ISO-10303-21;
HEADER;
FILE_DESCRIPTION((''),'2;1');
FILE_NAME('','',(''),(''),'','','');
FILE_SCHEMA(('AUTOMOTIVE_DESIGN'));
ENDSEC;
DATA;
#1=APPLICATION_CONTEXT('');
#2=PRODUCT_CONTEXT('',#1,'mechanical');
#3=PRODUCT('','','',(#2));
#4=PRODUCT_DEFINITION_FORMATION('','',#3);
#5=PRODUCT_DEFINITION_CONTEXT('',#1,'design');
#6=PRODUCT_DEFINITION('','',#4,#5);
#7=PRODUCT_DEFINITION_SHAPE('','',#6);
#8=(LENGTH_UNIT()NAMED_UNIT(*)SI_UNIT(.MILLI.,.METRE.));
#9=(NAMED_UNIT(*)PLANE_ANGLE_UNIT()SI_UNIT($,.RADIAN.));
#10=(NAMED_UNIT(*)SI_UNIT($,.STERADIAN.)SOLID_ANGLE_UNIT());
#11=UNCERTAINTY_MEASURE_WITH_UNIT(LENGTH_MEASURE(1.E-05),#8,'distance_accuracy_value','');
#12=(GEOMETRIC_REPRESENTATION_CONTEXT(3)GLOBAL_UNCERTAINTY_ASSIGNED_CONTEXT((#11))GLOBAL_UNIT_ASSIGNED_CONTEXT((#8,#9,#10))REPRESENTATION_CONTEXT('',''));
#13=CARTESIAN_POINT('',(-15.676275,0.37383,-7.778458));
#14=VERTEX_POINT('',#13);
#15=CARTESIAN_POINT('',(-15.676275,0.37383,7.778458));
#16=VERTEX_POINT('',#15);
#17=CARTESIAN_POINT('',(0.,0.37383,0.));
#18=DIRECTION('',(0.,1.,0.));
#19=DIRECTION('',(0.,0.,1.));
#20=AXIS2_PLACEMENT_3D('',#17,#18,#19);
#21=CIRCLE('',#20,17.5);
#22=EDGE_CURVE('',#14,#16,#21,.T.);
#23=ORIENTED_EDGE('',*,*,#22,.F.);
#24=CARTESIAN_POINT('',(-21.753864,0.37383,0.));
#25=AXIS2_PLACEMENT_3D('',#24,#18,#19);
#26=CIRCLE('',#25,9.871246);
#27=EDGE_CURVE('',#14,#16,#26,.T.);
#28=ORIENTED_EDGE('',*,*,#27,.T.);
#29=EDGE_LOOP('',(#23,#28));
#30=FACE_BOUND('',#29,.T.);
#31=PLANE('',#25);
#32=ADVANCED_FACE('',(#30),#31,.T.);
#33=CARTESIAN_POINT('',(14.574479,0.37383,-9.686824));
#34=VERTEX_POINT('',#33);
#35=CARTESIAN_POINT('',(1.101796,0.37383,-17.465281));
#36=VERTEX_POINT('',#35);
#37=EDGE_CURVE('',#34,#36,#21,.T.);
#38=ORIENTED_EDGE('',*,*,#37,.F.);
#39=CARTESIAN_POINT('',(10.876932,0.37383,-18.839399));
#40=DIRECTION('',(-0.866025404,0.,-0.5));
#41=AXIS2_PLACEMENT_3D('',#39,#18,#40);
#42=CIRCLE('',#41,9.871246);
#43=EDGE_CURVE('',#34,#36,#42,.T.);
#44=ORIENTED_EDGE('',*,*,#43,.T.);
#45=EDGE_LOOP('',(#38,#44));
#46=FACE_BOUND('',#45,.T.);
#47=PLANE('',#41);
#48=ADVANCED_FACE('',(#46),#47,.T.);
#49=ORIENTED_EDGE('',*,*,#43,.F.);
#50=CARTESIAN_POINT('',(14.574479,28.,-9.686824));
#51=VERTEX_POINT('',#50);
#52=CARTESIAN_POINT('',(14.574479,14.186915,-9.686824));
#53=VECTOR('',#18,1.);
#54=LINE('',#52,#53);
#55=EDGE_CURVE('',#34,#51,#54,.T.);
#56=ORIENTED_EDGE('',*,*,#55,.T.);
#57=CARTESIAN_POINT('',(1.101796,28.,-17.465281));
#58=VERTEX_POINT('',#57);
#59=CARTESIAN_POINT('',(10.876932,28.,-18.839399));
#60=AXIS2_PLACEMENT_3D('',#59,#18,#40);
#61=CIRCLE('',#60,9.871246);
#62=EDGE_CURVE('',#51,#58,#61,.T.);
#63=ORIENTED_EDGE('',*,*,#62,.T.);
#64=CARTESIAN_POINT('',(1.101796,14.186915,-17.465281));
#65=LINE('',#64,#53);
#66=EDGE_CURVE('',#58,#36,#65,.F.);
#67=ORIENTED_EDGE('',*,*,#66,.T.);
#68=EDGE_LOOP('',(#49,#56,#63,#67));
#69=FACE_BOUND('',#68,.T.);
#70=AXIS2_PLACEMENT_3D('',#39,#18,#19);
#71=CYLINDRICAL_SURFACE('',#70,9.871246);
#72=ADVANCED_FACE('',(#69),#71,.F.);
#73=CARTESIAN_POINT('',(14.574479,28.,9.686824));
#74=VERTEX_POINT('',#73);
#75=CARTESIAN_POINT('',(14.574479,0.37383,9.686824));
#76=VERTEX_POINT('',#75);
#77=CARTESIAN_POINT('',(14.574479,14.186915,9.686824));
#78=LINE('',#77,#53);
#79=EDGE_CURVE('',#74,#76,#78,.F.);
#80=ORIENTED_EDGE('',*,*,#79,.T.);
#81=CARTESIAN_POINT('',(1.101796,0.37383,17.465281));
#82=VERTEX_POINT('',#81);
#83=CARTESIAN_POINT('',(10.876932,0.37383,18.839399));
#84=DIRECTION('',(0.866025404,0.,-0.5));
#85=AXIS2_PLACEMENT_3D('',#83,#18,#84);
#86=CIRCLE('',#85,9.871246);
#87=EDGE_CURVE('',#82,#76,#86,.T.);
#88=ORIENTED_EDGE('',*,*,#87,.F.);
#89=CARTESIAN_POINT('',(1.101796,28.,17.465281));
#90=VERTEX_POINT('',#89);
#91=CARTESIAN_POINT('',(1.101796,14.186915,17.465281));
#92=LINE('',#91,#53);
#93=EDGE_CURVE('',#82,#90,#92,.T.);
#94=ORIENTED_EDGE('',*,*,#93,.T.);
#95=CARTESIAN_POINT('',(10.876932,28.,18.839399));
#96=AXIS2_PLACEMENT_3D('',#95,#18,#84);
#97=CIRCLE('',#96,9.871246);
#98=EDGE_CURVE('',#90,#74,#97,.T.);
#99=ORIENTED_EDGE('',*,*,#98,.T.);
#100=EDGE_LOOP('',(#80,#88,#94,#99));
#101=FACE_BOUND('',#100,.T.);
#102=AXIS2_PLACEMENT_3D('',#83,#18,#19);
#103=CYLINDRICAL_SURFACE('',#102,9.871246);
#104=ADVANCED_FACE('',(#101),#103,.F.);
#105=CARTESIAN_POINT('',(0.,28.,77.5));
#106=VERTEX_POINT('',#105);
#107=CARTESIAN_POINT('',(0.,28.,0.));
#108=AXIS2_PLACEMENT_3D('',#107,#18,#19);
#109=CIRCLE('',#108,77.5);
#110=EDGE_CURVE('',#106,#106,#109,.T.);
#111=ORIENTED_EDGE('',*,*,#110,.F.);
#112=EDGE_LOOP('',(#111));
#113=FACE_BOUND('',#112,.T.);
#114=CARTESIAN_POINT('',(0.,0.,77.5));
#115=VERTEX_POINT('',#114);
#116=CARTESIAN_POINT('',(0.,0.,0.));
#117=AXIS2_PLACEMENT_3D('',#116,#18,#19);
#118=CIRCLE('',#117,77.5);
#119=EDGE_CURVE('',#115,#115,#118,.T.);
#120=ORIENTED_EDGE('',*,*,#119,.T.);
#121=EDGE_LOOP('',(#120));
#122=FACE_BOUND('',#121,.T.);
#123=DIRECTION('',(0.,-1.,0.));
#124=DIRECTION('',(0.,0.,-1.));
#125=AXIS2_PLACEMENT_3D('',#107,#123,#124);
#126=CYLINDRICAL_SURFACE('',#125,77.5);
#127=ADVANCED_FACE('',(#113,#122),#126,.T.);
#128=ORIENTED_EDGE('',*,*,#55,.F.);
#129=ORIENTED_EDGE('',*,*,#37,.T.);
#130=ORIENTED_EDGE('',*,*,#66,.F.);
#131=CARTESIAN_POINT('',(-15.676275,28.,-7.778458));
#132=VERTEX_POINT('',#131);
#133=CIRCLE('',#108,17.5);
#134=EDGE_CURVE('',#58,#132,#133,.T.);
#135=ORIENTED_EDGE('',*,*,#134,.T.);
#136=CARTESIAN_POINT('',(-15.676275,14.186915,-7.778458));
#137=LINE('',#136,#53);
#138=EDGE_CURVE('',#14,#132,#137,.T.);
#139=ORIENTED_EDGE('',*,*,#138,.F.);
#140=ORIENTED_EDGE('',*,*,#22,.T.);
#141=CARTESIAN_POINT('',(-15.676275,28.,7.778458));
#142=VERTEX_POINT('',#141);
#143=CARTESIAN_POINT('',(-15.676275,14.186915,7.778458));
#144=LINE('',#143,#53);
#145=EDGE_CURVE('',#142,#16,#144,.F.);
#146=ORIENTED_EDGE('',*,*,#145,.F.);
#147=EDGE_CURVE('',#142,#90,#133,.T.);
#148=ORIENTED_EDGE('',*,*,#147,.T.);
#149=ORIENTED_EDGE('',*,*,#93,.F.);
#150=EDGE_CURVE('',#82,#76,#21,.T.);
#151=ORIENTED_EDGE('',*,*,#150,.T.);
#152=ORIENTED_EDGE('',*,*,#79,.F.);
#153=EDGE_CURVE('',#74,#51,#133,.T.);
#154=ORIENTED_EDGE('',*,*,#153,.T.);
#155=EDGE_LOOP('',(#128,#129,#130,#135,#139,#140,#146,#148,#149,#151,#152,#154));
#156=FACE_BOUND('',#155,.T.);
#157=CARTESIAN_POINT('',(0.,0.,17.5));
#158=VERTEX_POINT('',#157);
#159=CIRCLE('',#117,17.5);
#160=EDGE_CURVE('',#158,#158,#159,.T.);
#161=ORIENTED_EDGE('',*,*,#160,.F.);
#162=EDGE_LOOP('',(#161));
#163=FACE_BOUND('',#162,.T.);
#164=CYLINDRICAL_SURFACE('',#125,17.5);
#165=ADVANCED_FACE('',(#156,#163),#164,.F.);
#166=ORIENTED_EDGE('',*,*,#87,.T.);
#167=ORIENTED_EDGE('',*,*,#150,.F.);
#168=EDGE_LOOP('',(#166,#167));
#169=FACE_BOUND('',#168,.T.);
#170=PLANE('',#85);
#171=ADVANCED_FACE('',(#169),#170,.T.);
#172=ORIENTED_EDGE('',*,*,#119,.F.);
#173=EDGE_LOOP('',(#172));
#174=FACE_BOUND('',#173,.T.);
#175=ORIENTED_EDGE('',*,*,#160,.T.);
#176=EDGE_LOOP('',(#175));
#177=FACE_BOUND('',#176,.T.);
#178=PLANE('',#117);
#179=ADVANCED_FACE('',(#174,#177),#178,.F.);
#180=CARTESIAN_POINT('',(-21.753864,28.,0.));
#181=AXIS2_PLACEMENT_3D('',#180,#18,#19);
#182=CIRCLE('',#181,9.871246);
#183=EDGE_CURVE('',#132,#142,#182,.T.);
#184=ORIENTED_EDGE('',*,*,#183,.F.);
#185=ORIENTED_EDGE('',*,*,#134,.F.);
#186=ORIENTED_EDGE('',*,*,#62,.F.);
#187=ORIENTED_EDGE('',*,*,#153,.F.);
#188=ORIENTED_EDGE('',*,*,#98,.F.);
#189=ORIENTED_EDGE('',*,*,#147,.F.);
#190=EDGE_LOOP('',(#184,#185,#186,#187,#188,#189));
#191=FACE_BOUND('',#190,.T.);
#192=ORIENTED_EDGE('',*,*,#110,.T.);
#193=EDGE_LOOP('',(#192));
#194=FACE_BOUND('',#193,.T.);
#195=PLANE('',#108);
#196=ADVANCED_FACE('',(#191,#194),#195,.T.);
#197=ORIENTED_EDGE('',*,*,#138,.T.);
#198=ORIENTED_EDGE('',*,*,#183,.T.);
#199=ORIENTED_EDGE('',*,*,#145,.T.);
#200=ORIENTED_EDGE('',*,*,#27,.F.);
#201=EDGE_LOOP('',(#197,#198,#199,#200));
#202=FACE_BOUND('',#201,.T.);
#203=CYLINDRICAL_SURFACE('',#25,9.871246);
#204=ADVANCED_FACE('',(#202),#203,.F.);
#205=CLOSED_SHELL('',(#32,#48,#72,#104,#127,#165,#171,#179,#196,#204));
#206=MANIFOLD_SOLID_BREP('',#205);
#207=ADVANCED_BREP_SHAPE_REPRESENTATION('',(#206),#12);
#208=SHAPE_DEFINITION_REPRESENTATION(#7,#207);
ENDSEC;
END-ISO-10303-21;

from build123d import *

# Parameters (mm, degrees)
SKETCH1_R           = 77.5
BOSS_EXTRUDE1_DEPTH = 28
SKETCH2_R           = 17.5
CUT_EXTRUDE1_DEPTH  = 114.121615971
SKETCH3_R           = 9.871245717
CUT_EXTRUDE2_DEPTH  = 27.626170215
CIRPATTERN1_COUNT   = 3


with BuildPart() as part:
    # Sketch1 → Boss-Extrude1 (new body)
    with BuildSketch(Plane(origin=(0, 0, 0), x_dir=(1, 0, 0), z_dir=(0, 1, 0))):
        Circle(SKETCH1_R)
    extrude(amount=BOSS_EXTRUDE1_DEPTH)

    # Sketch2 → Cut-Extrude1 (cut, through all)
    with BuildSketch(Plane(origin=(0, 0, 0), x_dir=(1, 0, 0), z_dir=(0, 1, 0))):
        Circle(SKETCH2_R)
    extrude(amount=CUT_EXTRUDE1_DEPTH, mode=Mode.SUBTRACT)

    # Sketch3 → Cut-Extrude2 (cut)
    with BuildSketch(Plane(origin=(0, 28, 0), x_dir=(1, 0, 0), z_dir=(0, 1, 0))):
        with Locations((-21.753864026, 0)):
            Circle(SKETCH3_R)
    cut_extrude2 = extrude(amount=-CUT_EXTRUDE2_DEPTH, mode=Mode.SUBTRACT)

    # CirPattern1: Cut-Extrude2 ×3 about axis
    cirpattern1_axis = Axis((0, 0, 0), (0, 1, 0))
    for i in range(1, CIRPATTERN1_COUNT):
        add(cut_extrude2.rotate(cirpattern1_axis, i * 360 / CIRPATTERN1_COUNT), mode=Mode.SUBTRACT)


solid = part.part
